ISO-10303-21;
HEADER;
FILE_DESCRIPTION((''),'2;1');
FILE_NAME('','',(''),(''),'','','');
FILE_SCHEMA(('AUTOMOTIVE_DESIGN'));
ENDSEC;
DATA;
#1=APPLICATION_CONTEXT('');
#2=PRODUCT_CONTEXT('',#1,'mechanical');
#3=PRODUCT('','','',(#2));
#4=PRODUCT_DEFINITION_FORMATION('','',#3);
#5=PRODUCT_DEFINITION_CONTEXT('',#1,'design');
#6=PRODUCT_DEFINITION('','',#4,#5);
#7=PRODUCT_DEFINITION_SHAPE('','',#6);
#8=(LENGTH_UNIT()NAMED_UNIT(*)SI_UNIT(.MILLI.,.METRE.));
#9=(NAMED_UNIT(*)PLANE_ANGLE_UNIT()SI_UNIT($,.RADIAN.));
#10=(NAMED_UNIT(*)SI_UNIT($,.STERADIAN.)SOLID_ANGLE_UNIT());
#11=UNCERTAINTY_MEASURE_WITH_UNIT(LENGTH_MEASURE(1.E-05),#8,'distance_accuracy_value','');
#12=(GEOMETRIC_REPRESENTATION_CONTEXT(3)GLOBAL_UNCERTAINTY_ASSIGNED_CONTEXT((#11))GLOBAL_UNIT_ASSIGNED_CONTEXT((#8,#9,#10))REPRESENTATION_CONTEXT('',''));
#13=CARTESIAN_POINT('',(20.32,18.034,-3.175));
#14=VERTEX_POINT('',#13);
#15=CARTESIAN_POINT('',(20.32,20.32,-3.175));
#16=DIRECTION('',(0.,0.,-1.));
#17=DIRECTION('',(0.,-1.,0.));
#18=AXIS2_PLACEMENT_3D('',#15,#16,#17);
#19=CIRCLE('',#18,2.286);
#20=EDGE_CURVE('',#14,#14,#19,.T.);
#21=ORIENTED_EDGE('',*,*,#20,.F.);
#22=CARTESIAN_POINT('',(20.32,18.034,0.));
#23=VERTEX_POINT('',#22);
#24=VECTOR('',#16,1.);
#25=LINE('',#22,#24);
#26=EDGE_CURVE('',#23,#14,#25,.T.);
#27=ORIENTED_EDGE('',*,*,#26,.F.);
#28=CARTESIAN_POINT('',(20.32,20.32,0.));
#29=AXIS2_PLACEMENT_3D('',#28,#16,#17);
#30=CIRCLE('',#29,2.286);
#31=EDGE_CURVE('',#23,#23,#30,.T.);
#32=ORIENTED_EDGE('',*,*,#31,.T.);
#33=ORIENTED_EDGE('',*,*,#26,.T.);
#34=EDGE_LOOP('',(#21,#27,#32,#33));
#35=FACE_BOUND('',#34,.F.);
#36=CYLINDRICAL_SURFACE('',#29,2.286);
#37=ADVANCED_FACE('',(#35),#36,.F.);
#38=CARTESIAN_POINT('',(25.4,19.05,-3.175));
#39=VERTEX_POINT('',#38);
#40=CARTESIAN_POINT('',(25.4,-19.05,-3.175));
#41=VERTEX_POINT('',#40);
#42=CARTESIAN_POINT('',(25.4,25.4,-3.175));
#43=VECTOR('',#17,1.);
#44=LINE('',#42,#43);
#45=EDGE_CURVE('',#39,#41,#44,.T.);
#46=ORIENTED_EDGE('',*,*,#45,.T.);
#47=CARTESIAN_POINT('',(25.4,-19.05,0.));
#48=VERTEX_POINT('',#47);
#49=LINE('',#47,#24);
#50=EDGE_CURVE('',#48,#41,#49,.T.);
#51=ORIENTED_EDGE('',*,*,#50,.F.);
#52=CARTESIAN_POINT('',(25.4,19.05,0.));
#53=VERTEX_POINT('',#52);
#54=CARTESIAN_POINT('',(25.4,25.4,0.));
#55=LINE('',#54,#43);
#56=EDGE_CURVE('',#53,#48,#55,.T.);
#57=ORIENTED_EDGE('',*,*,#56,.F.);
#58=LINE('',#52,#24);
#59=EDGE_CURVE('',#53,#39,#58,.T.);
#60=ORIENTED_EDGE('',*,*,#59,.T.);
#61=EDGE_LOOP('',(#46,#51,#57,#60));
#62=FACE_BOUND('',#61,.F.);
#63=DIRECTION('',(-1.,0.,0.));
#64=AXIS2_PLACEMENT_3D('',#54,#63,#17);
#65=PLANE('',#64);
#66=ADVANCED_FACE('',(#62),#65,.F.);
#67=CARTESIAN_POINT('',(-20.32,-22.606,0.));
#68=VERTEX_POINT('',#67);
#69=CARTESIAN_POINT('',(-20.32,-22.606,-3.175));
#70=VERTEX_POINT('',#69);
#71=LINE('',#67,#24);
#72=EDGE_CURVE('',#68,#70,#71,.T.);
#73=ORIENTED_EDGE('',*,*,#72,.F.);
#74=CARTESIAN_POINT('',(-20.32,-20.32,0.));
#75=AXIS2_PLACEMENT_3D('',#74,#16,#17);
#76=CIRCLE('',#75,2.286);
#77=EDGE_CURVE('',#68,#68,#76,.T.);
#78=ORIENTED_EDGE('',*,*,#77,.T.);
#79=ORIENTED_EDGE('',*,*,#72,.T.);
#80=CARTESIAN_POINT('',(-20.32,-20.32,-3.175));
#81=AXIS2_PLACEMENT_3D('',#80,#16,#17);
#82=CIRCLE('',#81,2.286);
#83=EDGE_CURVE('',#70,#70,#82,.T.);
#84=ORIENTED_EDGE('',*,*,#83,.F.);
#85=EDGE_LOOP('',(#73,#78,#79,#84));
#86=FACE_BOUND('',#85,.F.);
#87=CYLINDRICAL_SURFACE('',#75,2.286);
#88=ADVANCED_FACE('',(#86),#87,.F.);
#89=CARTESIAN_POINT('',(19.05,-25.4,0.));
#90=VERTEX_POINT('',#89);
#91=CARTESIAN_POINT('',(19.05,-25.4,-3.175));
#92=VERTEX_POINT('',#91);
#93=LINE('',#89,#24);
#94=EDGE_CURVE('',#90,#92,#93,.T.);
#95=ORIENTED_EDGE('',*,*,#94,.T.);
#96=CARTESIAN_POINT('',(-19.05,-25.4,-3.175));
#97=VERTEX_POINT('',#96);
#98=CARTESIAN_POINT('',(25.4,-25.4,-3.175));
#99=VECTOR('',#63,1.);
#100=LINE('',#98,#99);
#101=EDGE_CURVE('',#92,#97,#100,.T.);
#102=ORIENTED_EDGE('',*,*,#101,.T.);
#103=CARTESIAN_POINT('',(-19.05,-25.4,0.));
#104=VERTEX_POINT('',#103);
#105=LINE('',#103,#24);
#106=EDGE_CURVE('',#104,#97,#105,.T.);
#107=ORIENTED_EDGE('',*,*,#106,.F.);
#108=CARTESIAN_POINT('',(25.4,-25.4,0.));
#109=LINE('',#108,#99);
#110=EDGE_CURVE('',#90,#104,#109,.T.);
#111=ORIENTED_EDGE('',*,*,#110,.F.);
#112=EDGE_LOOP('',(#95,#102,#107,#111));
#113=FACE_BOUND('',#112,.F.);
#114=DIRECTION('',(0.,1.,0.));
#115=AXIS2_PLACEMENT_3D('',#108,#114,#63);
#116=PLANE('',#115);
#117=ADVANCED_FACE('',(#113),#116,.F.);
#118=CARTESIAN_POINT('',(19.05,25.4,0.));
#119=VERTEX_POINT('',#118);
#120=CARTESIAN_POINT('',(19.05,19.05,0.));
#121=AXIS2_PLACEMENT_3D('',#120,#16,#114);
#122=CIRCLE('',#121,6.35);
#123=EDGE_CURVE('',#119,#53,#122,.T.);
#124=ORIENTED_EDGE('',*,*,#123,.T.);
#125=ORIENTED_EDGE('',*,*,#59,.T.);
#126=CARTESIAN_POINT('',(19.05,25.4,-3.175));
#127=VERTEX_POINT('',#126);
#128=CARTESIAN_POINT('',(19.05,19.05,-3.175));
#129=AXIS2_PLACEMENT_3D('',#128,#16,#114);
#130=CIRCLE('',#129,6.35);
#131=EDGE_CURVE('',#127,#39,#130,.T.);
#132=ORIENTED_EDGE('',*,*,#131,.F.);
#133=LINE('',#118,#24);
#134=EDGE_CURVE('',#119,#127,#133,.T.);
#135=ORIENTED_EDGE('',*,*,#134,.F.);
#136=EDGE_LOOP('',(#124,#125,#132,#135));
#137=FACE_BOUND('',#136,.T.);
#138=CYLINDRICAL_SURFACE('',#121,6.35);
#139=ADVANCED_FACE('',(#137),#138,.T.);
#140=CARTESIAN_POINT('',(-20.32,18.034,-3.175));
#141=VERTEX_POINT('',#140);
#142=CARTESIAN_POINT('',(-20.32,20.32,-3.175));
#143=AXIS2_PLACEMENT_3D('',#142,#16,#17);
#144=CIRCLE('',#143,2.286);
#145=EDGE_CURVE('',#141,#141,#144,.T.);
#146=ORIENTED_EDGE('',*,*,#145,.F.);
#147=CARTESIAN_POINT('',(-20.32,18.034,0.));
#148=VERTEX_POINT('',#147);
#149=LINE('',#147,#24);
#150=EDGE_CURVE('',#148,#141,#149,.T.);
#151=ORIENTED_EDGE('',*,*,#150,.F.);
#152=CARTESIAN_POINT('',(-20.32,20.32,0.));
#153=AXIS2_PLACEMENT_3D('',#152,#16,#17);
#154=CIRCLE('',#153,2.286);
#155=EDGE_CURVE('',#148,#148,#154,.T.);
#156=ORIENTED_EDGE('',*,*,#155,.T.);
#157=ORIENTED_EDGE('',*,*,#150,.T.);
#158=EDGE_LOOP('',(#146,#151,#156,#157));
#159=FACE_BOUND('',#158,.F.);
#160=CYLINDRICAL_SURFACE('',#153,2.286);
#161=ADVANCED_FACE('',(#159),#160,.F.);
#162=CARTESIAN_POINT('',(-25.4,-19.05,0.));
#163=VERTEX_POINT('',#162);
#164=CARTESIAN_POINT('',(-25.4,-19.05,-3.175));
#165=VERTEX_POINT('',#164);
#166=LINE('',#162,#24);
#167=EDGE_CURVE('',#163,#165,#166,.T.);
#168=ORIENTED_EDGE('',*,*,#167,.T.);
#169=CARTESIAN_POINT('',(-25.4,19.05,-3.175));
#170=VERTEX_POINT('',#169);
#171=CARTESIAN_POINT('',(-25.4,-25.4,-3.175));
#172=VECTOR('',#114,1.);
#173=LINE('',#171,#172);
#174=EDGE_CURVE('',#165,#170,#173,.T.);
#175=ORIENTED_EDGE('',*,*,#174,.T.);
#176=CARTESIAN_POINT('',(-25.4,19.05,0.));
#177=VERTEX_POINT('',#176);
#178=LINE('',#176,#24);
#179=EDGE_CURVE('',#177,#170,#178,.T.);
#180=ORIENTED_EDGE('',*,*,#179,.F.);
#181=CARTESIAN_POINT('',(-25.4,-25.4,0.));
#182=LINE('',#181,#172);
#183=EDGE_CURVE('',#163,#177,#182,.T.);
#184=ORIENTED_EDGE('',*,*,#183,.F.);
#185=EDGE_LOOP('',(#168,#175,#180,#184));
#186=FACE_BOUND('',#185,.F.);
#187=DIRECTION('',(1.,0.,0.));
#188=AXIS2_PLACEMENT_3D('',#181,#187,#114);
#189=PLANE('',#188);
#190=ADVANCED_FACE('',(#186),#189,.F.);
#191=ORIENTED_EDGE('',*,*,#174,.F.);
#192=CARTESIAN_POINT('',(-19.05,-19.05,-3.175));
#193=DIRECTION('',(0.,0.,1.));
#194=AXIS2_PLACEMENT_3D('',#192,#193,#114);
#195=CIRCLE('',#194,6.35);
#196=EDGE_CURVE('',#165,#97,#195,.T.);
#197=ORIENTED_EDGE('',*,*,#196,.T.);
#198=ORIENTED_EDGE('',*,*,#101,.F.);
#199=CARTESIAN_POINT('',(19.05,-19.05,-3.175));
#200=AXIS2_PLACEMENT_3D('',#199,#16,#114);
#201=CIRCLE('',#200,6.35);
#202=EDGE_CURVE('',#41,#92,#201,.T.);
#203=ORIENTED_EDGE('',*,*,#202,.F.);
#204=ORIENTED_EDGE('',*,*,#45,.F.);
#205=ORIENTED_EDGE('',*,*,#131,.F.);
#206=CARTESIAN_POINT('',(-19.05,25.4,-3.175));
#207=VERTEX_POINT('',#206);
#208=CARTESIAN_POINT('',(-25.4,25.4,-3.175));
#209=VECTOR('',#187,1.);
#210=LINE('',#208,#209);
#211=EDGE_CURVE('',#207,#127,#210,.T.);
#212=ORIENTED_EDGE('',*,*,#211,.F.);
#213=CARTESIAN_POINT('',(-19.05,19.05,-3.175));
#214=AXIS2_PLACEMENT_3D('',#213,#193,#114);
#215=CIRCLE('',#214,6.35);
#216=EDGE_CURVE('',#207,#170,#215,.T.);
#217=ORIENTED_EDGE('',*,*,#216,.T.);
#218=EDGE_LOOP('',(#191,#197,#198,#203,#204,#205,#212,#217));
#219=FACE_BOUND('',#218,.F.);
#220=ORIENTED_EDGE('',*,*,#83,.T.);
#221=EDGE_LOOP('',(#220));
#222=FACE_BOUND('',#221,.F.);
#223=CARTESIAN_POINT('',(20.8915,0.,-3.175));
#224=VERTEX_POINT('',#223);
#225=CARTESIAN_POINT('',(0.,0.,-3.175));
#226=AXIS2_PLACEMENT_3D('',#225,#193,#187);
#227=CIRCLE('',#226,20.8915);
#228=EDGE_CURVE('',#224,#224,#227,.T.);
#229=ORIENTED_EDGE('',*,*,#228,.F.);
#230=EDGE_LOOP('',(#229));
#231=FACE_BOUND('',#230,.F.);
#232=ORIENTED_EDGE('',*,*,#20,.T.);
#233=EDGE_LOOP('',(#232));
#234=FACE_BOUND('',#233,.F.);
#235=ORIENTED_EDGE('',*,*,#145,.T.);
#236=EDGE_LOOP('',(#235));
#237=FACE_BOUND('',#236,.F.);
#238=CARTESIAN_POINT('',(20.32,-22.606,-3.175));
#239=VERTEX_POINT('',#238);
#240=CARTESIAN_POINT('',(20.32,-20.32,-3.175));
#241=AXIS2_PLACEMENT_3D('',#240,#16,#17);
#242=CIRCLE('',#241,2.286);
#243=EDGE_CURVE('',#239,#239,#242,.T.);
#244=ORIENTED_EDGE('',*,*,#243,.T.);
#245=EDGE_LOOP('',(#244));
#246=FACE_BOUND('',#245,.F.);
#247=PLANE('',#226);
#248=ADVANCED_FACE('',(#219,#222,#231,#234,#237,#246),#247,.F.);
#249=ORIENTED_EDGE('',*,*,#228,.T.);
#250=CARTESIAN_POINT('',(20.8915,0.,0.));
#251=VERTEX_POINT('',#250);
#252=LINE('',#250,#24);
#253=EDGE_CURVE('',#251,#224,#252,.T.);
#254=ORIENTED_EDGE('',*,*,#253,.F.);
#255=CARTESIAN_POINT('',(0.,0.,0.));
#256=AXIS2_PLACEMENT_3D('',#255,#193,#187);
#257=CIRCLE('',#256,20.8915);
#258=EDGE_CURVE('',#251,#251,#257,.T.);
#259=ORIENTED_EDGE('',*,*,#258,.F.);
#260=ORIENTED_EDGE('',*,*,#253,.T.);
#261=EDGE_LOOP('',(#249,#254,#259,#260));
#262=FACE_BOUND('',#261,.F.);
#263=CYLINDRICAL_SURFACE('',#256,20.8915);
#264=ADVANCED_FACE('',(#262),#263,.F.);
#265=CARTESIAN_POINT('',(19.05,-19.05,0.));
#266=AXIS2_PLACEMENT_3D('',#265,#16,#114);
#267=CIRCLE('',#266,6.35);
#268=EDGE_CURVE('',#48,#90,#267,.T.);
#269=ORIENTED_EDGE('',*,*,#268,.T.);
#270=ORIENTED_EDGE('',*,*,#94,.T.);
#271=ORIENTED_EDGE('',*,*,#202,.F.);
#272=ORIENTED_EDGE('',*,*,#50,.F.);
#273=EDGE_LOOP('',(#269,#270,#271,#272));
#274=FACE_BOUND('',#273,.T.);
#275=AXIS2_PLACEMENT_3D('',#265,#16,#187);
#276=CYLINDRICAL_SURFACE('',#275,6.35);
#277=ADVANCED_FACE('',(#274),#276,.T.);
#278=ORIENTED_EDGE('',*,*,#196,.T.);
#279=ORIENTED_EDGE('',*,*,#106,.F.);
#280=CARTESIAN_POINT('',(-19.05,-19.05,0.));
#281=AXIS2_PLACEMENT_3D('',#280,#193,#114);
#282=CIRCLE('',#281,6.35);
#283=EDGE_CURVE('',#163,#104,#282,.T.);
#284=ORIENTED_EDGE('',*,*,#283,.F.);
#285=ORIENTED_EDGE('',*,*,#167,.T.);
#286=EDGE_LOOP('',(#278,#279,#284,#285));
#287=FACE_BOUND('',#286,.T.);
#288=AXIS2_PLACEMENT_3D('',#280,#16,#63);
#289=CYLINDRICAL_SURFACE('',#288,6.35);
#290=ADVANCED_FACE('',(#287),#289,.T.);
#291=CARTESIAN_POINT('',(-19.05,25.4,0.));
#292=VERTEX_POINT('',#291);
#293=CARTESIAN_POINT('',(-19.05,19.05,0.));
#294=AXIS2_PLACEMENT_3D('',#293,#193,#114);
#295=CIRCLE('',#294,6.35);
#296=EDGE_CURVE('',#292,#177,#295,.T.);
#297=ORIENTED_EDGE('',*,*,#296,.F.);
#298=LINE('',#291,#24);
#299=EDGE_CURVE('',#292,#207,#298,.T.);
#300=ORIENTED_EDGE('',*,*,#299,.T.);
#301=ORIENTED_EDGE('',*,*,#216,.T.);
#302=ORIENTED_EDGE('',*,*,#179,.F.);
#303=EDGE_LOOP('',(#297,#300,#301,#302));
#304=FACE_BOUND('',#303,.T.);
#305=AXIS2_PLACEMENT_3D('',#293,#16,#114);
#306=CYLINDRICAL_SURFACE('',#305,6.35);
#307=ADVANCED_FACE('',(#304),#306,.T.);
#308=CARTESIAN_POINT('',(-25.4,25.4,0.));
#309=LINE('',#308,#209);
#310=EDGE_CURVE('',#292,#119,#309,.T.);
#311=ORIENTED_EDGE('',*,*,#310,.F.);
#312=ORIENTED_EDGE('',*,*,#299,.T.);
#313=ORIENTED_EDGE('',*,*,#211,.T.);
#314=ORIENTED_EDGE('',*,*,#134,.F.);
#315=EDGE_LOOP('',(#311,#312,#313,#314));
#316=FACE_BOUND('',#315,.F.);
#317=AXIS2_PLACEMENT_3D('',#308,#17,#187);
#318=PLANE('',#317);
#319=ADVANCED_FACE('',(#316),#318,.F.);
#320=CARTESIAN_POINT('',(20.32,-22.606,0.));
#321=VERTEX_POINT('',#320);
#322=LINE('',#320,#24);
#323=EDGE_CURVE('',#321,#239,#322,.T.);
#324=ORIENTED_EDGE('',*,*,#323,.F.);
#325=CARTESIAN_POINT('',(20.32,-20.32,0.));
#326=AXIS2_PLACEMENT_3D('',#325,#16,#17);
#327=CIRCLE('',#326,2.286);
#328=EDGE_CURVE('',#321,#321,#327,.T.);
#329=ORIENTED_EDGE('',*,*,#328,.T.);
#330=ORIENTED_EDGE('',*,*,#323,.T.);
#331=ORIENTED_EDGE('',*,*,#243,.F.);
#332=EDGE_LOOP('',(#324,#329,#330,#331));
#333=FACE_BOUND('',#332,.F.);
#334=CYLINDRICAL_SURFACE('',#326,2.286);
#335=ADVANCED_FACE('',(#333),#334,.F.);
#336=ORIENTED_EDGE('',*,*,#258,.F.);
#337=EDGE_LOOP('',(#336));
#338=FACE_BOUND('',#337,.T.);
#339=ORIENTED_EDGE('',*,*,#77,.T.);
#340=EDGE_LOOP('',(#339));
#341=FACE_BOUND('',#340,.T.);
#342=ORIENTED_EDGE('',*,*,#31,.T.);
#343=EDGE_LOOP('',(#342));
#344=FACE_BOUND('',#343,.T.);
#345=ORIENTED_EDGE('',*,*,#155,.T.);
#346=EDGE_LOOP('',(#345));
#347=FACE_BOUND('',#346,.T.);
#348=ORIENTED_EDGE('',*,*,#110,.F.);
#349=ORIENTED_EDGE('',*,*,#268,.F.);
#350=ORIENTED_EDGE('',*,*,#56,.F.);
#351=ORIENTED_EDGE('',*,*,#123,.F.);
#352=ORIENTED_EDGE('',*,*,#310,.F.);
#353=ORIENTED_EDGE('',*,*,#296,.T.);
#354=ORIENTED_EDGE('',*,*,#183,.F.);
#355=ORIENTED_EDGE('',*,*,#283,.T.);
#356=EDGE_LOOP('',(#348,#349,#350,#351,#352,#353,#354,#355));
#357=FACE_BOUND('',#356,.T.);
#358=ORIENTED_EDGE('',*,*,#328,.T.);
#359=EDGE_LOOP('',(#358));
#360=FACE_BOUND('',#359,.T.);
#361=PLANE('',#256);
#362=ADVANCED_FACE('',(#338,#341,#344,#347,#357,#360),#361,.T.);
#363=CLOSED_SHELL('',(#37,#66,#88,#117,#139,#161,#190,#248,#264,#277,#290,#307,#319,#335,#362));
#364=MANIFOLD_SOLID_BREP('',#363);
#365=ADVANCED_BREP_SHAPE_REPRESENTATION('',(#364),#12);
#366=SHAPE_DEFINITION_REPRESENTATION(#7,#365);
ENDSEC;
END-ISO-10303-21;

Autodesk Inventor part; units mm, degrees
ref_plane "YZ Plane" through (0, 0, 0) normal (1, 0, 0) x (0, 1, 0)
ref_plane "XZ Plane" through (0, 0, 0) normal (0, 1, 0) x (-1, 0, 0)
ref_plane "XY Plane" through (0, 0, 0) normal (0, 0, 1) x (1, 0, 0)
sketch "Sketch1" plane through (0, 0, 0) normal (0, 0, 1) x (1, 0, 0)
  line L0 (-13, 12) -> (13, 12)
  line L1 (13, 12) -> (13, -12)
  line L2 (13, -12) -> (-13, -12)
  line L3 (-13, -12) -> (-13, 12)
  line L4 (-13, 3.25) -> (-15, 3.25)
  line L5 (-15, 3.25) -> (-15, -3.25)
  line L6 (-15, -3.25) -> (-13, -3.25)
  line L7 (-13, -3.25) -> (-13, 3.25)
  line L8 (13, 3.25) -> (15, 3.25)
  line L9 (15, 3.25) -> (15, -3.25)
  line L10 (15, -3.25) -> (13, -3.25)
  line L11 (13, -3.25) -> (13, 3.25)
  line L12 (-25.4, 25.4) -> (25.4, 25.4)
  line L13 (25.4, 25.4) -> (25.4, -25.4)
  line L14 (25.4, -25.4) -> (-25.4, -25.4)
  line L15 (-25.4, -25.4) -> (-25.4, 25.4)
  circle A0 centre (0, 0) radius 7.1437
  circle A1 centre (-3, 12) radius 1.5
  line L16 (-13, 8) -> (-9, 12)
  line L17 (9, 12) -> (13, 8)
  line L18 (13, -8) -> (9, -12)
  line L19 (-13, -8) -> (-9, -12)
  circle A2 centre (0, 0) radius 20.8915
  circle A3 centre (-21.997, 0) radius 1.5875
  circle A4 centre (10.9985, 19.05) radius 1.5875
  circle A5 centre (10.9985, -19.05) radius 1.5875
  circle A6 centre (0, 0) radius 21.997 construction
  point P0 (-14, 3.25)
  point P1 (14, 3.25)
  point P2 (-14, -3.25)
  point P3 (14, -3.25)
  point P4 (-20.32, 20.32)
  point P5 (20.32, 20.32)
  point P6 (20.32, -20.32)
  point P7 (-20.32, -20.32)
  dimension "d0" = 24
  dimension "d1" = 12
  dimension "d2" = 26
  dimension "d3" = 13
  dimension "d4" = 2
  dimension "d5" = 6.5
  dimension "d6" = 3.25
  dimension "d7" = 2
  dimension "d8" = 14.2875
  dimension "d9" = 50.8
  dimension "d10" = 25.4
  dimension "d11" = 50.8
  dimension "d12" = 25.4
  dimension "d13" = 3
  dimension "d14" = 10
  dimension "d15" = 4
  dimension "d16" = 4
  dimension "d17" = 4
  dimension "d18" = 4
  dimension "d19" = 4
  dimension "d20" = 5.08
  dimension "d21" = 5.08
  dimension "d22" = 5.08
  dimension "d23" = 5.08
  dimension "d34" = 40.64
  dimension "d35" = 40.64
  dimension "d44" = 41.783
  dimension "d45" = 3.175
  dimension "d46" = 3.175
  dimension "d47" = 3.175
  dimension "d48" = 38.1
  dimension "d49" = 38.1
  dimension "d50" = 38.1
  dimension "d51" = 38.1
  dimension "d53" = 43.9941
extrude "Extrusion1" add sketch "Sketch1" against normal blind 3.175 contours L0 L16 L3 | L0 L1 L17 | L19 L2 L3 | L18 L1 L2 | L12 L13 L14 L15 | A2 A5 A3 A4 | A4 A2 | A2 A4 | A5 A2 | A2 A5 | A3 A2 | A2 A3
fillet "Fillet1" radius 3.175 4 edges at (-13, -3.25, -1.5875) (-13, 3.25, -1.5875) (13, 3.25, -1.5875) (13, -3.25, -1.5875)
hole "Hole1" at (-20.32, 20.32, 0) at (20.32, 20.32, 0) at (20.32, -20.32, 0) at (-20.32, -20.32, 0) direction (0, 0, -1) diameter 4.572 end through all
extrude "Extrusion2" cut sketch "Sketch1" against normal blind 25.4 contours L0 L16 L3 | L0 A1 L17 L1 L18 L2 L19 L3 L16 | L0 A1 | L0 L1 L17 | L19 L2 L3 | L18 L1 L2 | A0 | A2 A5 A3 A4 | A4 A2 | A2 A5 | A3 A2 picked at (-3.284, 11.1238) picked at (10.4165, 17.9252) picked at (10.4165, -17.9252) picked at (-20.7286, 0)
fillet "Fillet2" radius 6.35 4 edges at (25.4, 25.4, -1.5875) (-25.4, 25.4, -1.5875) (25.4, -25.4, -1.5875) (-25.4, -25.4, -1.5875)
equation "\"d1\" = 0.5 * d0"
equation "\"d3\" = 0.5 * d2"
equation "\"d6\" = 0.5 * d5"
equation "\"d7\" = d4"
equation "\"d10\" = 0.5 * d9"
equation "\"d12\" = 0.5 * d11"
equation "\"d16\" = d15"
equation "\"d17\" = d15"
equation "\"d18\" = d15"
equation "\"d19\" = d15"
equation "\"d22\" = d21"
equation "\"d23\" = d21"
equation "\"d46\" = d45"
equation "\"d47\" = d45"
properties part number "BD gearbox mount block"
